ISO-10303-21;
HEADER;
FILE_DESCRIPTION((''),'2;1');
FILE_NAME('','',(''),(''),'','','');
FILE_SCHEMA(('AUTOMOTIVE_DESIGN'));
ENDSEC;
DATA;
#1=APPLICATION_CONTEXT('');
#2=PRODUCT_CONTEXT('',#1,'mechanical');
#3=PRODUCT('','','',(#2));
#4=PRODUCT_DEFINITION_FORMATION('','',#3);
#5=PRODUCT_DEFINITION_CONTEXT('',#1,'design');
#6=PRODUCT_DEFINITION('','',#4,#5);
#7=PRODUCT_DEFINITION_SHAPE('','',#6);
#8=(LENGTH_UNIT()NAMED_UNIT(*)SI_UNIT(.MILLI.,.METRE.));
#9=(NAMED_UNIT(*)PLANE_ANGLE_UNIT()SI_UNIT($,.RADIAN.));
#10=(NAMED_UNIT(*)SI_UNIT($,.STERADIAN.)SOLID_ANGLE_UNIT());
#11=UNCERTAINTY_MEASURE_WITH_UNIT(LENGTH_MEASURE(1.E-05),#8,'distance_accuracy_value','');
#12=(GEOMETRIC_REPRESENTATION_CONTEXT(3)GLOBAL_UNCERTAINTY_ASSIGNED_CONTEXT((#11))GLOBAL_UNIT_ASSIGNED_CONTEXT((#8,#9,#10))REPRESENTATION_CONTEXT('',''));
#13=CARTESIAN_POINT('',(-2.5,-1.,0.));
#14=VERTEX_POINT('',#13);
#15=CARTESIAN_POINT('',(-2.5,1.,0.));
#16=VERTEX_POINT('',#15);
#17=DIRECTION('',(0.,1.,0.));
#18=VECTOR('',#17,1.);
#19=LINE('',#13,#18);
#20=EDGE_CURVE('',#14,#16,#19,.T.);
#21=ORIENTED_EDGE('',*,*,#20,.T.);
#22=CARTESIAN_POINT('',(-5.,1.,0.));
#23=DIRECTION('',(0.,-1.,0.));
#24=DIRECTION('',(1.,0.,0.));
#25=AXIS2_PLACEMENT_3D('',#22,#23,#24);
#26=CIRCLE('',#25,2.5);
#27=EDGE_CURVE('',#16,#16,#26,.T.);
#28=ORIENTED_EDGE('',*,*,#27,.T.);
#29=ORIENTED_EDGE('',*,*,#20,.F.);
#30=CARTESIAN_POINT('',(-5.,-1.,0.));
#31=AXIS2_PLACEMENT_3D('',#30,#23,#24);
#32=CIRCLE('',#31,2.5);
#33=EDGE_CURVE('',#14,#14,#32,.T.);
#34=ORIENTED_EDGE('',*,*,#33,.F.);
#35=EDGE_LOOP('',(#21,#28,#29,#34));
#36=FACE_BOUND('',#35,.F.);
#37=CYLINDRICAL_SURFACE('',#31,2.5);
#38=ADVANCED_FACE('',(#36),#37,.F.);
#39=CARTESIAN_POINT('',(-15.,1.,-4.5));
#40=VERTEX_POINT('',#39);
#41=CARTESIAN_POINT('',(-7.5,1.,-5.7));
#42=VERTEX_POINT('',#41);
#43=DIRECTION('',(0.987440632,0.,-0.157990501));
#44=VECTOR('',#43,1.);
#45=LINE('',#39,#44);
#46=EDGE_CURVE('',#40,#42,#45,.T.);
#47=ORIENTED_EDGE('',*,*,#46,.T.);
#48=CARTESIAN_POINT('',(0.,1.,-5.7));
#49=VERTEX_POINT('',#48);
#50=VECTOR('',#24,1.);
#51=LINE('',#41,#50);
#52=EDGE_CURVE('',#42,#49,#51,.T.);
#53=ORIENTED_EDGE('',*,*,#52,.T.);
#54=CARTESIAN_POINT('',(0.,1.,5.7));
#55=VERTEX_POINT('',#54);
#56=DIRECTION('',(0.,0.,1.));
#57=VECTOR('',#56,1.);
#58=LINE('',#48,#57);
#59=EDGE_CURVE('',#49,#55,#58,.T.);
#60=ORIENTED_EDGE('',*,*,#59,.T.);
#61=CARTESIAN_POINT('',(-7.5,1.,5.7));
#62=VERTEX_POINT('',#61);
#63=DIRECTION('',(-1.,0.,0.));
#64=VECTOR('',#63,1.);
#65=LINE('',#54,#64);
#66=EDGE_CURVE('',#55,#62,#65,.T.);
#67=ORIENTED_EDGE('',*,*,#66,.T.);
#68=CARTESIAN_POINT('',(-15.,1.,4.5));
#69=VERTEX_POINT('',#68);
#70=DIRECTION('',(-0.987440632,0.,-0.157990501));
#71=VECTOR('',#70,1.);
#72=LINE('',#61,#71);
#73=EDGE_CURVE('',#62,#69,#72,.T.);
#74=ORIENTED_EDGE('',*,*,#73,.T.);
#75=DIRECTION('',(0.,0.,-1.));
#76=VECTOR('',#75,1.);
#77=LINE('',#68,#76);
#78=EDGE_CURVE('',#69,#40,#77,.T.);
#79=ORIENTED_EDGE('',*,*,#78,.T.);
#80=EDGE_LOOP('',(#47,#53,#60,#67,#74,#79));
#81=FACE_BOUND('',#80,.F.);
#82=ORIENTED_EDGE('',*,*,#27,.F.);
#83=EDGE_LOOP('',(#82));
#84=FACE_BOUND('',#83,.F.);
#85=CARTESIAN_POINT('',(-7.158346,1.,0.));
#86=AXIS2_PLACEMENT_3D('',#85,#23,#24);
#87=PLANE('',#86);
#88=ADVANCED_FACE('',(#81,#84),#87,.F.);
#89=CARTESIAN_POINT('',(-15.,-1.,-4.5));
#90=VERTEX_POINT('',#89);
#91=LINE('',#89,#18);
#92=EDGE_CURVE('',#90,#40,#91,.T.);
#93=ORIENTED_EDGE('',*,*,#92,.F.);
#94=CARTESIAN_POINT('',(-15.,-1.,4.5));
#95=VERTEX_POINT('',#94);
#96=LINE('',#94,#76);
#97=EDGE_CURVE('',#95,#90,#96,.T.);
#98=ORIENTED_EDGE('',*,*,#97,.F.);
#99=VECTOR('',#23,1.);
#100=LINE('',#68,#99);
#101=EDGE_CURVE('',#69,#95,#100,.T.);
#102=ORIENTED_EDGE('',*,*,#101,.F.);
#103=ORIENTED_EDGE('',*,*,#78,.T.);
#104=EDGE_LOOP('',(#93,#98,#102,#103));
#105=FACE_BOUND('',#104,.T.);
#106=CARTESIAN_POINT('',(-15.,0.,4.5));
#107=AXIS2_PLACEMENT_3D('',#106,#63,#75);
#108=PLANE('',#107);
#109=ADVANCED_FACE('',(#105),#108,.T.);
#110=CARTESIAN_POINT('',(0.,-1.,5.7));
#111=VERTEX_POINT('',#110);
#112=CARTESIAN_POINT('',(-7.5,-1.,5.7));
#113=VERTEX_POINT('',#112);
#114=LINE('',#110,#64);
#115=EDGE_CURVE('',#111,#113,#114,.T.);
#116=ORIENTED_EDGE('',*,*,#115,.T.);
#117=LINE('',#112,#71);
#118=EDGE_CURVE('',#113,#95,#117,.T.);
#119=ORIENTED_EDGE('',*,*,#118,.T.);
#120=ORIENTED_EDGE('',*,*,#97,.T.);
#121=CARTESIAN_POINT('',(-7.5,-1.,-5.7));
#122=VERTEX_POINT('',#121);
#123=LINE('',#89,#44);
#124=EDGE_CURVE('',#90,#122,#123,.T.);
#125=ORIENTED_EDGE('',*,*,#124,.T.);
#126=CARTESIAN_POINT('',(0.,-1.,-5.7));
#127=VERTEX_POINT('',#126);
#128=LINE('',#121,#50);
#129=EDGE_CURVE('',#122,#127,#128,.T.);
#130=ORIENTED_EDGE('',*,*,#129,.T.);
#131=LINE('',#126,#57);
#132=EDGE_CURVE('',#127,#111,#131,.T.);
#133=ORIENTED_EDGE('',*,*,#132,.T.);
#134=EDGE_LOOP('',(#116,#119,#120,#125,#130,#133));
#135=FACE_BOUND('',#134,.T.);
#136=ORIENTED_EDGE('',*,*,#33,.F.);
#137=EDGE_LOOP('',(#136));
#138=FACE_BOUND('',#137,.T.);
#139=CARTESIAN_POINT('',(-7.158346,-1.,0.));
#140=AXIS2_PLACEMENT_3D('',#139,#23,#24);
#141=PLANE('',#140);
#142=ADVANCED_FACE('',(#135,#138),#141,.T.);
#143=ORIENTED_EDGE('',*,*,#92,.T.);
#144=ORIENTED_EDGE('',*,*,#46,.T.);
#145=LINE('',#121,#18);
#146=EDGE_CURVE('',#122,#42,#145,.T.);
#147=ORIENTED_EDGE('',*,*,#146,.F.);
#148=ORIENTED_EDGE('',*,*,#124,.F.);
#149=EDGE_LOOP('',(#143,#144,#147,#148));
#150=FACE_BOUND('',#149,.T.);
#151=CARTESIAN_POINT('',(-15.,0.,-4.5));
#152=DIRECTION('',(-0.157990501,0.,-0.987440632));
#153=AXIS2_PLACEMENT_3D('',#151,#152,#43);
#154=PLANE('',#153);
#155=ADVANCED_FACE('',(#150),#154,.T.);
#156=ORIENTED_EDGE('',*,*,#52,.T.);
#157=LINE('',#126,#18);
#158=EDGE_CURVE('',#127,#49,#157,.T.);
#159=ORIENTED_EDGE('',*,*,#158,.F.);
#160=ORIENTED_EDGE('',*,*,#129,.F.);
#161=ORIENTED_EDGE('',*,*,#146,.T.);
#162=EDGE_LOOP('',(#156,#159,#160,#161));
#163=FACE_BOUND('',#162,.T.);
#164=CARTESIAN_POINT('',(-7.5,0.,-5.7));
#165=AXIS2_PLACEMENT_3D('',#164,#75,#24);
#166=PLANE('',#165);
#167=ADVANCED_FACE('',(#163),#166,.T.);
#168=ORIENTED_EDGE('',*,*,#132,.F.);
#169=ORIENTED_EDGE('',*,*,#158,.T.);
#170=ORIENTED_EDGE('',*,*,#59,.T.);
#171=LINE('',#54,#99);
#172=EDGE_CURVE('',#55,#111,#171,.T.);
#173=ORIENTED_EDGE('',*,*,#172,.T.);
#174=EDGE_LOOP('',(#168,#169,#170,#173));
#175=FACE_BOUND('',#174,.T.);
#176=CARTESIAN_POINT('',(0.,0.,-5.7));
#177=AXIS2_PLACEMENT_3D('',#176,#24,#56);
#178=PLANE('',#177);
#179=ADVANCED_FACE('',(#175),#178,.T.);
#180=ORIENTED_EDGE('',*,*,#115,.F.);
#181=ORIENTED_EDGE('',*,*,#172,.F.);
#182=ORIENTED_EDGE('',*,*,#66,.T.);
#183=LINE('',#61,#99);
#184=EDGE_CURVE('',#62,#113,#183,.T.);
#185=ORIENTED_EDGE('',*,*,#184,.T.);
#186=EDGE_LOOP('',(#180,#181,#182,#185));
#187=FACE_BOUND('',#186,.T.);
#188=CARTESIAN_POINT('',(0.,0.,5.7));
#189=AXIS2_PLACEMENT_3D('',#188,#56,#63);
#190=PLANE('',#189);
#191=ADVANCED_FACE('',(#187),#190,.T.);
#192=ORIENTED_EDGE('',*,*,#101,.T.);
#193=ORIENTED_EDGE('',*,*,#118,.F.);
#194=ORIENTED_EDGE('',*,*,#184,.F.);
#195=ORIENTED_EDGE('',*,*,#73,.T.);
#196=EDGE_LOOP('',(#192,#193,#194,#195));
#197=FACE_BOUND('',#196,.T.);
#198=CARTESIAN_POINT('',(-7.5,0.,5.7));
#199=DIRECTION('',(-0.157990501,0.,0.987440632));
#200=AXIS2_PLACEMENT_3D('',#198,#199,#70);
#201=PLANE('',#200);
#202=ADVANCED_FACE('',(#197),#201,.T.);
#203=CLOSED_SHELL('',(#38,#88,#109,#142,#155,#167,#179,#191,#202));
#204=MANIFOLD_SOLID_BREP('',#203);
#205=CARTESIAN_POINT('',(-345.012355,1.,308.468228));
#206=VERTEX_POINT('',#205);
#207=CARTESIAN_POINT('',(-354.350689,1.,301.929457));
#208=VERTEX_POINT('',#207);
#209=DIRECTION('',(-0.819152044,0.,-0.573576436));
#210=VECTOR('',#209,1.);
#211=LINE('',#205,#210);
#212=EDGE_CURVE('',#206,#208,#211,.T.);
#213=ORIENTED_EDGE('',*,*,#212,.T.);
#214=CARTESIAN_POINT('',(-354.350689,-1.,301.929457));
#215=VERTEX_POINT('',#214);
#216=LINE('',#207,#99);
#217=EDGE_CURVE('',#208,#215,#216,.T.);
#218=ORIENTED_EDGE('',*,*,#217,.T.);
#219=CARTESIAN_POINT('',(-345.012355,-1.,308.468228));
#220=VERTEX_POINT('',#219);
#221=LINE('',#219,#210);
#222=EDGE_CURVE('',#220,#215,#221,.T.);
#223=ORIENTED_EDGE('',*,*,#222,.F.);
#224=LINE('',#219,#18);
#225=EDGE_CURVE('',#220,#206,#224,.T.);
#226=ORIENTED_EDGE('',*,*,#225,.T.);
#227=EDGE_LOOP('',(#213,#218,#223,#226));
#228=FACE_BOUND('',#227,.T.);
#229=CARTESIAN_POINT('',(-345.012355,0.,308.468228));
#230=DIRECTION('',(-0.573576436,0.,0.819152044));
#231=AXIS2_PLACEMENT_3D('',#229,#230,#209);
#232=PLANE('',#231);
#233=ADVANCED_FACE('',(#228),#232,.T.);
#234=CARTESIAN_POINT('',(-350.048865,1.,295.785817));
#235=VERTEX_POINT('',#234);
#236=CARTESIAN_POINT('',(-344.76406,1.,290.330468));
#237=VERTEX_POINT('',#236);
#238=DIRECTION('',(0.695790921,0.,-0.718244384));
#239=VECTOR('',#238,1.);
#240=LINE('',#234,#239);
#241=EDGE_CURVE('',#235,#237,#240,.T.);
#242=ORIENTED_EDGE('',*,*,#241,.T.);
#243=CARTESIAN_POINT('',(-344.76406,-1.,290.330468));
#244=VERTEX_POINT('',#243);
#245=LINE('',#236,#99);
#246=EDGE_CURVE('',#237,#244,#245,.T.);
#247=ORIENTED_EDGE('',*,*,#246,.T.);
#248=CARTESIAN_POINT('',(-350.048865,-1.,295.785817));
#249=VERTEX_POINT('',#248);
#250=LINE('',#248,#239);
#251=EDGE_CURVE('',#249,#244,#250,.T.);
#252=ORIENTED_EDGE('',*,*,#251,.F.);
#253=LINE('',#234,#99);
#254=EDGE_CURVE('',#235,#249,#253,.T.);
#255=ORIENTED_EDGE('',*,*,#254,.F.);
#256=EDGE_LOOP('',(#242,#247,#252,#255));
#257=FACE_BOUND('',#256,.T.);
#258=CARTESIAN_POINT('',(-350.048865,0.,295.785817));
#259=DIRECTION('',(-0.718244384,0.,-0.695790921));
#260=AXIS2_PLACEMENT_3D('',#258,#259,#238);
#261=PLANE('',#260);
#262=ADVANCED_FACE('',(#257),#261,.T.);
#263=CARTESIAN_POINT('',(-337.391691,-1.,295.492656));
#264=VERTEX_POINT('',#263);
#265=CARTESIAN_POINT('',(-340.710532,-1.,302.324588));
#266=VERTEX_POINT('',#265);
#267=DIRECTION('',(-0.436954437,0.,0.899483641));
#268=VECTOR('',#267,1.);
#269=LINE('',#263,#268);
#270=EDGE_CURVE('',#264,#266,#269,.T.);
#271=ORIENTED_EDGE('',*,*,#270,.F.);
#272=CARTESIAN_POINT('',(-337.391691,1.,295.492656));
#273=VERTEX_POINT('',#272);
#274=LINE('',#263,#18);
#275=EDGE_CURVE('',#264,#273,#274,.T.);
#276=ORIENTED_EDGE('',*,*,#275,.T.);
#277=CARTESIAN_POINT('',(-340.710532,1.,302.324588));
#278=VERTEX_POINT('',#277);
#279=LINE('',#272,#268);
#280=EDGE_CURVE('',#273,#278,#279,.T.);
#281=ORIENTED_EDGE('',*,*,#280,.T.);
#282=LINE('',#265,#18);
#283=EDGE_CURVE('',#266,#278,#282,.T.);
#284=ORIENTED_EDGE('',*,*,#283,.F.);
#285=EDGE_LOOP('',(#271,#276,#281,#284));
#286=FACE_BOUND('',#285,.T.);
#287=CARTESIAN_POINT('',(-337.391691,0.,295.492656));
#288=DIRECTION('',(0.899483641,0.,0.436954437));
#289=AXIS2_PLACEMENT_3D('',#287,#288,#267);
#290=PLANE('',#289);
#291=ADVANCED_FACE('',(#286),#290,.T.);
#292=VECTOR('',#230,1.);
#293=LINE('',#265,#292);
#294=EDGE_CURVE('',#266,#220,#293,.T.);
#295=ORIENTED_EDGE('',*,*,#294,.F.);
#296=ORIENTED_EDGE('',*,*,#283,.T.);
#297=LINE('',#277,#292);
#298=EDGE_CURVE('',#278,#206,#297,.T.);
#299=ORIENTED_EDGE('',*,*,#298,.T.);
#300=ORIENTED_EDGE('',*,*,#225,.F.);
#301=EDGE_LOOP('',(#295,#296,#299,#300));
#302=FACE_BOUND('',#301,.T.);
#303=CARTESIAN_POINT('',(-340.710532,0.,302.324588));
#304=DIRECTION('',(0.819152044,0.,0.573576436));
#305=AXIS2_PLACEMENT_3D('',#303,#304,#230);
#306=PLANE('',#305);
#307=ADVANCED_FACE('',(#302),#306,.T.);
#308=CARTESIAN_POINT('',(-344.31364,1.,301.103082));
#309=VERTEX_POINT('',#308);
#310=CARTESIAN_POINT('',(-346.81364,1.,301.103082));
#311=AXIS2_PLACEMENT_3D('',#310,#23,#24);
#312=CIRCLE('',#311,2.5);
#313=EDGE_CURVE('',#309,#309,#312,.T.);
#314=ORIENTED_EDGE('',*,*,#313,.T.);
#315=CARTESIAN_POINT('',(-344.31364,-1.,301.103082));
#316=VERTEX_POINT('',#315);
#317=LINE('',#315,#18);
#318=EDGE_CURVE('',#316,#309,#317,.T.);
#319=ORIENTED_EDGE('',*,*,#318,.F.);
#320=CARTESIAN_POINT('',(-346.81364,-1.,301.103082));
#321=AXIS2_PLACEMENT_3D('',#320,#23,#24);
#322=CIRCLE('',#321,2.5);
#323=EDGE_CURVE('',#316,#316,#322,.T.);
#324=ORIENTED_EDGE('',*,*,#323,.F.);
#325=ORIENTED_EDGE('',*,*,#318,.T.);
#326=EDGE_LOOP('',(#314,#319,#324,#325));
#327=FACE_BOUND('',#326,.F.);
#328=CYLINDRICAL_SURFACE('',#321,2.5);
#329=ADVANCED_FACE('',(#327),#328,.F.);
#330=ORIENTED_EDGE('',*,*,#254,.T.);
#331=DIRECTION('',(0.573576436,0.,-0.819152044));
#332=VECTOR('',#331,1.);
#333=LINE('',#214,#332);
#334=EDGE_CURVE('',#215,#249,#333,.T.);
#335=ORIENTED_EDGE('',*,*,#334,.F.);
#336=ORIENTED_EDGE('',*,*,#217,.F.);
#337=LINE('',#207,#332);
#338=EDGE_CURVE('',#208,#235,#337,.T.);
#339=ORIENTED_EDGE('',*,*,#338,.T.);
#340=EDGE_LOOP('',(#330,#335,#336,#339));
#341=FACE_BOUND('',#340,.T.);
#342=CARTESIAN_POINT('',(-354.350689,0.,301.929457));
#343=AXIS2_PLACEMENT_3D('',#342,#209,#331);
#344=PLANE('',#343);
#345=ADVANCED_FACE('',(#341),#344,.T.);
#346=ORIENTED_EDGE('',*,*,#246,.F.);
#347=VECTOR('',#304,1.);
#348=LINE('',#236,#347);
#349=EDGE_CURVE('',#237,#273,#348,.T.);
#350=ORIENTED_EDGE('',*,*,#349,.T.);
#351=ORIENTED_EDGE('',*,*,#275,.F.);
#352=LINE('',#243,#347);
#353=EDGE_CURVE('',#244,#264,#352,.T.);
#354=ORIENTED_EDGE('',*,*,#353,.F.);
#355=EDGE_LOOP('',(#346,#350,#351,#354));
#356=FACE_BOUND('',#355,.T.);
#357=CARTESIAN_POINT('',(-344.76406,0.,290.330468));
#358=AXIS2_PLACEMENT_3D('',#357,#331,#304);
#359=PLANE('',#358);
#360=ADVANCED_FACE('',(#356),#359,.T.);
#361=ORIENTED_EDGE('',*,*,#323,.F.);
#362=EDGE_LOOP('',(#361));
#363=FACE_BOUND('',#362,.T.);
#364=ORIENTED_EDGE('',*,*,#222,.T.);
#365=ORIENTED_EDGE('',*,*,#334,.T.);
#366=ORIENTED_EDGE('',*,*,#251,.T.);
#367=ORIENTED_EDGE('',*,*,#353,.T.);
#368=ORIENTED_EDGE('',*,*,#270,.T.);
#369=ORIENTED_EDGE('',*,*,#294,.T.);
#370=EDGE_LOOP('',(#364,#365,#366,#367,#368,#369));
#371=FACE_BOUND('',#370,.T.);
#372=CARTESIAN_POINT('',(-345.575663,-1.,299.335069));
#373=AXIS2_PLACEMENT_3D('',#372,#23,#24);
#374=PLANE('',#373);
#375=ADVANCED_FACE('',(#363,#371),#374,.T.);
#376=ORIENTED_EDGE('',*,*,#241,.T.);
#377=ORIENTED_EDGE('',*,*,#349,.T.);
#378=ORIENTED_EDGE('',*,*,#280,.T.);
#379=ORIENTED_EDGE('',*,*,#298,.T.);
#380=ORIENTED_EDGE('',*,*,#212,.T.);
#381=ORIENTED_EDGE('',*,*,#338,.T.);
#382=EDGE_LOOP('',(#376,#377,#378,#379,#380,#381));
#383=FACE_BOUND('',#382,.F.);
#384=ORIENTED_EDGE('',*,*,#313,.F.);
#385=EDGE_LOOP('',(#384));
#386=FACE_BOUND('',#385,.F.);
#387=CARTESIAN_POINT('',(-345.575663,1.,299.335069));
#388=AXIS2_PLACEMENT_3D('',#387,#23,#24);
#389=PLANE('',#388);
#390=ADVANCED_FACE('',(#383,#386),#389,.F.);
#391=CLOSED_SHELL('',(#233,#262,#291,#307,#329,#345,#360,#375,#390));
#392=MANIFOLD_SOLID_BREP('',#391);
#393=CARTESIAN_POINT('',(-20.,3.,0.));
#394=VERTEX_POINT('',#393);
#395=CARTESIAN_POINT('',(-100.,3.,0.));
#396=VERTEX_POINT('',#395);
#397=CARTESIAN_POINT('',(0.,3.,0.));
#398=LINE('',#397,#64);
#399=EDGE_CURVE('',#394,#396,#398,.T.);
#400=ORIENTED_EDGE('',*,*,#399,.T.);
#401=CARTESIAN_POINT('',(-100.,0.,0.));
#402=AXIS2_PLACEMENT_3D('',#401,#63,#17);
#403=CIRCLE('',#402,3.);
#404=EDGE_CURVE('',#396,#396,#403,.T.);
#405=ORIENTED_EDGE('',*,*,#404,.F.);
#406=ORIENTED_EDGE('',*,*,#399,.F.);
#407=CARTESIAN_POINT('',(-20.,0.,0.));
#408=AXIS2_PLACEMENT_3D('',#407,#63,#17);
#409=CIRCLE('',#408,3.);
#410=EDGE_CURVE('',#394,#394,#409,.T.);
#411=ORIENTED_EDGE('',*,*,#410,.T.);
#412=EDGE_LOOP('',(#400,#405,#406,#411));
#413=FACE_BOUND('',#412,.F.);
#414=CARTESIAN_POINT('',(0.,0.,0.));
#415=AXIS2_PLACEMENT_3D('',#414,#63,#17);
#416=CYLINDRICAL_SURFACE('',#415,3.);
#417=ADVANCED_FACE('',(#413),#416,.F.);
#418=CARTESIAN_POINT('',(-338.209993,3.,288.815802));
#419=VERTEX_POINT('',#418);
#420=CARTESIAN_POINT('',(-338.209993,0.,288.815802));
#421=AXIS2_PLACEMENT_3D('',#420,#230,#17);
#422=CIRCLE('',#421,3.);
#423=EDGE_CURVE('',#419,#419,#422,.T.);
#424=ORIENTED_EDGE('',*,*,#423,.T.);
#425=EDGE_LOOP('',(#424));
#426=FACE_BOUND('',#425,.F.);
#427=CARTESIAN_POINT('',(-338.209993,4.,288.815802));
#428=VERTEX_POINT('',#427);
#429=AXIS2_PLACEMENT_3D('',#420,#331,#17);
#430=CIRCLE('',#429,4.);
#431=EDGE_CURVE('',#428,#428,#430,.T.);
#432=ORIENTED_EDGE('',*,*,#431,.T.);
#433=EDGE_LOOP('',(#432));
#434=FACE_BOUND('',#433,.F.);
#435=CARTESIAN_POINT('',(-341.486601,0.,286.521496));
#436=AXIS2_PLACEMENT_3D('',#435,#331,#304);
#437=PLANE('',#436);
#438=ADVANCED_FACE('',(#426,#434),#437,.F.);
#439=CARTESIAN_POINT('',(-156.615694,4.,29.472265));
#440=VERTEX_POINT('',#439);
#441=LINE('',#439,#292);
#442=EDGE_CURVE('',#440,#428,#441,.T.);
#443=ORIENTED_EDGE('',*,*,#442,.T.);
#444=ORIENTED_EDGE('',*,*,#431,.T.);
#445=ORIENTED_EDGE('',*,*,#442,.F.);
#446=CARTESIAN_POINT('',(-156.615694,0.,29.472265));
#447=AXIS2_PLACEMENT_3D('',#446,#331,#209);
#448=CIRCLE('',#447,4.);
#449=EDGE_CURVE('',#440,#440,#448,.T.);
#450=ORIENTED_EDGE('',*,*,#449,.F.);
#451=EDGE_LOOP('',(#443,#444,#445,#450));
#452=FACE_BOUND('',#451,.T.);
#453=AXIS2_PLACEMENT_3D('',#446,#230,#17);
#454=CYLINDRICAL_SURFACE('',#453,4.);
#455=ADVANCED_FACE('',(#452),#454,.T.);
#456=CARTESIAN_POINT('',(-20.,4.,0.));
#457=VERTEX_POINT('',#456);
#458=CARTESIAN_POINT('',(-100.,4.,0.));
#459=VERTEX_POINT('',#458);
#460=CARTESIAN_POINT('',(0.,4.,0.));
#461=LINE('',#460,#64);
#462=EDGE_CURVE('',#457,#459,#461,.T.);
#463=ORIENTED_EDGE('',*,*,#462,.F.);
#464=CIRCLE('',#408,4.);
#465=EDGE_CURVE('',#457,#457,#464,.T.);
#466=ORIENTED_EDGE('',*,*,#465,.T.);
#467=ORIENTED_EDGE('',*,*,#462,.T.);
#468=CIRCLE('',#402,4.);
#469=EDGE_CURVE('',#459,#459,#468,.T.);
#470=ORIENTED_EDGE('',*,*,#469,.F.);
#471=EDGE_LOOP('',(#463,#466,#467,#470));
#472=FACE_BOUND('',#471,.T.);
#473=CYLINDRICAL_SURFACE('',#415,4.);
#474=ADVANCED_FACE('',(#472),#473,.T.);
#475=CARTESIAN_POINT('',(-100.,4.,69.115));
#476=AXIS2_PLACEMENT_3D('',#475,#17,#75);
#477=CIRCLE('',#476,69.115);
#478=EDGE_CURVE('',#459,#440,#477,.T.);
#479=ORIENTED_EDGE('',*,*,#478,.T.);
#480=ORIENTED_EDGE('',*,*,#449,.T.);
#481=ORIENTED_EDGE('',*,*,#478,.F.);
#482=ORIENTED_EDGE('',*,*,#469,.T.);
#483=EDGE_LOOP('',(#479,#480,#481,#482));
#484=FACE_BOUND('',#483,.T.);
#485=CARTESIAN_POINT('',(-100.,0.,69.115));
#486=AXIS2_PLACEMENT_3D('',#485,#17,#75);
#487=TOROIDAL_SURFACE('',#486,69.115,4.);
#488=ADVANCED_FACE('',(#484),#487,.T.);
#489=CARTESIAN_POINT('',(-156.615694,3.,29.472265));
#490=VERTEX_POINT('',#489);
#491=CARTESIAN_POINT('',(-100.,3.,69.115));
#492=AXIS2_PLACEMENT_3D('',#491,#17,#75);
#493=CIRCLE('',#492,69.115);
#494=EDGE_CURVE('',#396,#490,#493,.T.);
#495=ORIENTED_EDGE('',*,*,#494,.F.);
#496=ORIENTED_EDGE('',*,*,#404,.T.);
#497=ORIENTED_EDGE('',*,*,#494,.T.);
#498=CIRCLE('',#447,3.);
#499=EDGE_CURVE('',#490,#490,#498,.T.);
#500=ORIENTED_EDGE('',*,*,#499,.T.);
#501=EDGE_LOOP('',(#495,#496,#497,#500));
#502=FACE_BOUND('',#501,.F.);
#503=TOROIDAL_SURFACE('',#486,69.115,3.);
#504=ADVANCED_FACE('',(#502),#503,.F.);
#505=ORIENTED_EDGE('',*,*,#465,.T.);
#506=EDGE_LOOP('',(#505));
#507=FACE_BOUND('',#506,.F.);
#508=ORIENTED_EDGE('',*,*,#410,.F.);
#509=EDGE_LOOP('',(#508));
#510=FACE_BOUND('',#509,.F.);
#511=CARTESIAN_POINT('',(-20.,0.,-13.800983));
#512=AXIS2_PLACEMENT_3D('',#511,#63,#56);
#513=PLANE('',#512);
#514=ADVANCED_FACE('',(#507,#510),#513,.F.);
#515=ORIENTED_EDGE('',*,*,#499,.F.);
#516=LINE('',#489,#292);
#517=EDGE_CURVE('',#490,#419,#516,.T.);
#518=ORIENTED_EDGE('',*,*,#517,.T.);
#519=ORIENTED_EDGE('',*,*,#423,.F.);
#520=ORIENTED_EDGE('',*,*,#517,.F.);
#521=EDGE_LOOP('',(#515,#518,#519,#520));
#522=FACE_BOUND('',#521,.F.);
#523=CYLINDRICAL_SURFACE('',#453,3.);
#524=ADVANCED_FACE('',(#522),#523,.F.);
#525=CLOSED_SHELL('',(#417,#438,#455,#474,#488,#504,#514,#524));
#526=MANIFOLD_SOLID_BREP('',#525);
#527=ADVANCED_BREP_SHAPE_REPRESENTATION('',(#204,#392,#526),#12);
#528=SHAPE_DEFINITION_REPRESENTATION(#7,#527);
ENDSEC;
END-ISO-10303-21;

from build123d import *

# Parameters (mm, degrees)
F1_R      = 4
F1_R_2    = 3
F3_W      = 40
F3_H      = 27.601965531
F4_DEPTH  = 12.5
F6_DEPTH  = 1
F9_R      = 2.5
F10_DEPTH = 5.0010001


# Not quite as in the source:
# - the program builds the solid bodies; features that only make, move or delete a surface that nothing else refers to are left out


with BuildPart() as f2:
    # F2: sweep along a path in F0
    with BuildLine(Plane.XZ) as f2_path:
        Line((0, 0), (-100, 0))
        ThreePointArc((-100, 0), (-131.9137554037, 7.8092462649), (-156.615693541, 29.4722646016))
        Line((-156.615693541, 29.4722646016), (-349.6815220168, 305.1988427093))
    # F1 (on Right) → F2 (sweep)
    with BuildSketch(Plane.YZ):
        Circle(F1_R)
        Circle(F1_R_2, mode=Mode.SUBTRACT)
    sweep(path=f2_path.line)

    # F3 (on Front) → F4 (cut, symmetric)
    with BuildSketch(Plane.XZ):
        Rectangle(F3_W, F3_H)
        Polygon((-346.4049138396, 307.4931484547), (-352.958130194, 302.9045369639), (-341.4866014669, 286.5214960781), (-334.9333851126, 291.1101075689), align=None)
    extrude(amount=F4_DEPTH, both=True, mode=Mode.SUBTRACT)


with BuildPart() as f6:
    # F5 (on Front) → F6 (new body, symmetric)
    with BuildSketch(Plane.XZ):
        Polygon((0, -5.7), (0, 5.7), (-7.5, 5.7), (-15, 4.5), (-15, -4.5), (-7.5, -5.7), align=None)
    extrude(amount=F6_DEPTH, both=True)


with BuildPart() as f6b:
    # F5 (on Front) → F6, piece 2 (new body, symmetric)
    with BuildSketch(Plane.XZ):
        Polygon((-345.0123553643, 308.4682283965), (-354.3506886692, 301.9294570221), (-350.0488653966, 295.7858166899), (-344.7640596708, 290.3304680814), (-337.3916912722, 295.4926560085), (-340.7105320917, 302.3245880643), align=None)
    extrude(amount=F6_DEPTH, both=True)


with BuildPart() as f10_tool:
    # F9 (on face) → F10 (new body, through all)
    with BuildSketch(Plane.XZ.offset(1)):
        with Locations((-346.813639835, 301.1030824878)):
            Circle(F9_R)
        with Locations((-5, 0)):
            Circle(F9_R)
    extrude(amount=-F10_DEPTH)


with BuildPart() as f6_1:
    add(f6.part)

    # F10: cut by f10_tool
    add(f10_tool.part, mode=Mode.SUBTRACT)


with BuildPart() as f6b_1:
    add(f6b.part)

    # F10: cut by f10_tool
    add(f10_tool.part, mode=Mode.SUBTRACT)


solid = Compound([f2.part, f6_1.part, f6b_1.part])
